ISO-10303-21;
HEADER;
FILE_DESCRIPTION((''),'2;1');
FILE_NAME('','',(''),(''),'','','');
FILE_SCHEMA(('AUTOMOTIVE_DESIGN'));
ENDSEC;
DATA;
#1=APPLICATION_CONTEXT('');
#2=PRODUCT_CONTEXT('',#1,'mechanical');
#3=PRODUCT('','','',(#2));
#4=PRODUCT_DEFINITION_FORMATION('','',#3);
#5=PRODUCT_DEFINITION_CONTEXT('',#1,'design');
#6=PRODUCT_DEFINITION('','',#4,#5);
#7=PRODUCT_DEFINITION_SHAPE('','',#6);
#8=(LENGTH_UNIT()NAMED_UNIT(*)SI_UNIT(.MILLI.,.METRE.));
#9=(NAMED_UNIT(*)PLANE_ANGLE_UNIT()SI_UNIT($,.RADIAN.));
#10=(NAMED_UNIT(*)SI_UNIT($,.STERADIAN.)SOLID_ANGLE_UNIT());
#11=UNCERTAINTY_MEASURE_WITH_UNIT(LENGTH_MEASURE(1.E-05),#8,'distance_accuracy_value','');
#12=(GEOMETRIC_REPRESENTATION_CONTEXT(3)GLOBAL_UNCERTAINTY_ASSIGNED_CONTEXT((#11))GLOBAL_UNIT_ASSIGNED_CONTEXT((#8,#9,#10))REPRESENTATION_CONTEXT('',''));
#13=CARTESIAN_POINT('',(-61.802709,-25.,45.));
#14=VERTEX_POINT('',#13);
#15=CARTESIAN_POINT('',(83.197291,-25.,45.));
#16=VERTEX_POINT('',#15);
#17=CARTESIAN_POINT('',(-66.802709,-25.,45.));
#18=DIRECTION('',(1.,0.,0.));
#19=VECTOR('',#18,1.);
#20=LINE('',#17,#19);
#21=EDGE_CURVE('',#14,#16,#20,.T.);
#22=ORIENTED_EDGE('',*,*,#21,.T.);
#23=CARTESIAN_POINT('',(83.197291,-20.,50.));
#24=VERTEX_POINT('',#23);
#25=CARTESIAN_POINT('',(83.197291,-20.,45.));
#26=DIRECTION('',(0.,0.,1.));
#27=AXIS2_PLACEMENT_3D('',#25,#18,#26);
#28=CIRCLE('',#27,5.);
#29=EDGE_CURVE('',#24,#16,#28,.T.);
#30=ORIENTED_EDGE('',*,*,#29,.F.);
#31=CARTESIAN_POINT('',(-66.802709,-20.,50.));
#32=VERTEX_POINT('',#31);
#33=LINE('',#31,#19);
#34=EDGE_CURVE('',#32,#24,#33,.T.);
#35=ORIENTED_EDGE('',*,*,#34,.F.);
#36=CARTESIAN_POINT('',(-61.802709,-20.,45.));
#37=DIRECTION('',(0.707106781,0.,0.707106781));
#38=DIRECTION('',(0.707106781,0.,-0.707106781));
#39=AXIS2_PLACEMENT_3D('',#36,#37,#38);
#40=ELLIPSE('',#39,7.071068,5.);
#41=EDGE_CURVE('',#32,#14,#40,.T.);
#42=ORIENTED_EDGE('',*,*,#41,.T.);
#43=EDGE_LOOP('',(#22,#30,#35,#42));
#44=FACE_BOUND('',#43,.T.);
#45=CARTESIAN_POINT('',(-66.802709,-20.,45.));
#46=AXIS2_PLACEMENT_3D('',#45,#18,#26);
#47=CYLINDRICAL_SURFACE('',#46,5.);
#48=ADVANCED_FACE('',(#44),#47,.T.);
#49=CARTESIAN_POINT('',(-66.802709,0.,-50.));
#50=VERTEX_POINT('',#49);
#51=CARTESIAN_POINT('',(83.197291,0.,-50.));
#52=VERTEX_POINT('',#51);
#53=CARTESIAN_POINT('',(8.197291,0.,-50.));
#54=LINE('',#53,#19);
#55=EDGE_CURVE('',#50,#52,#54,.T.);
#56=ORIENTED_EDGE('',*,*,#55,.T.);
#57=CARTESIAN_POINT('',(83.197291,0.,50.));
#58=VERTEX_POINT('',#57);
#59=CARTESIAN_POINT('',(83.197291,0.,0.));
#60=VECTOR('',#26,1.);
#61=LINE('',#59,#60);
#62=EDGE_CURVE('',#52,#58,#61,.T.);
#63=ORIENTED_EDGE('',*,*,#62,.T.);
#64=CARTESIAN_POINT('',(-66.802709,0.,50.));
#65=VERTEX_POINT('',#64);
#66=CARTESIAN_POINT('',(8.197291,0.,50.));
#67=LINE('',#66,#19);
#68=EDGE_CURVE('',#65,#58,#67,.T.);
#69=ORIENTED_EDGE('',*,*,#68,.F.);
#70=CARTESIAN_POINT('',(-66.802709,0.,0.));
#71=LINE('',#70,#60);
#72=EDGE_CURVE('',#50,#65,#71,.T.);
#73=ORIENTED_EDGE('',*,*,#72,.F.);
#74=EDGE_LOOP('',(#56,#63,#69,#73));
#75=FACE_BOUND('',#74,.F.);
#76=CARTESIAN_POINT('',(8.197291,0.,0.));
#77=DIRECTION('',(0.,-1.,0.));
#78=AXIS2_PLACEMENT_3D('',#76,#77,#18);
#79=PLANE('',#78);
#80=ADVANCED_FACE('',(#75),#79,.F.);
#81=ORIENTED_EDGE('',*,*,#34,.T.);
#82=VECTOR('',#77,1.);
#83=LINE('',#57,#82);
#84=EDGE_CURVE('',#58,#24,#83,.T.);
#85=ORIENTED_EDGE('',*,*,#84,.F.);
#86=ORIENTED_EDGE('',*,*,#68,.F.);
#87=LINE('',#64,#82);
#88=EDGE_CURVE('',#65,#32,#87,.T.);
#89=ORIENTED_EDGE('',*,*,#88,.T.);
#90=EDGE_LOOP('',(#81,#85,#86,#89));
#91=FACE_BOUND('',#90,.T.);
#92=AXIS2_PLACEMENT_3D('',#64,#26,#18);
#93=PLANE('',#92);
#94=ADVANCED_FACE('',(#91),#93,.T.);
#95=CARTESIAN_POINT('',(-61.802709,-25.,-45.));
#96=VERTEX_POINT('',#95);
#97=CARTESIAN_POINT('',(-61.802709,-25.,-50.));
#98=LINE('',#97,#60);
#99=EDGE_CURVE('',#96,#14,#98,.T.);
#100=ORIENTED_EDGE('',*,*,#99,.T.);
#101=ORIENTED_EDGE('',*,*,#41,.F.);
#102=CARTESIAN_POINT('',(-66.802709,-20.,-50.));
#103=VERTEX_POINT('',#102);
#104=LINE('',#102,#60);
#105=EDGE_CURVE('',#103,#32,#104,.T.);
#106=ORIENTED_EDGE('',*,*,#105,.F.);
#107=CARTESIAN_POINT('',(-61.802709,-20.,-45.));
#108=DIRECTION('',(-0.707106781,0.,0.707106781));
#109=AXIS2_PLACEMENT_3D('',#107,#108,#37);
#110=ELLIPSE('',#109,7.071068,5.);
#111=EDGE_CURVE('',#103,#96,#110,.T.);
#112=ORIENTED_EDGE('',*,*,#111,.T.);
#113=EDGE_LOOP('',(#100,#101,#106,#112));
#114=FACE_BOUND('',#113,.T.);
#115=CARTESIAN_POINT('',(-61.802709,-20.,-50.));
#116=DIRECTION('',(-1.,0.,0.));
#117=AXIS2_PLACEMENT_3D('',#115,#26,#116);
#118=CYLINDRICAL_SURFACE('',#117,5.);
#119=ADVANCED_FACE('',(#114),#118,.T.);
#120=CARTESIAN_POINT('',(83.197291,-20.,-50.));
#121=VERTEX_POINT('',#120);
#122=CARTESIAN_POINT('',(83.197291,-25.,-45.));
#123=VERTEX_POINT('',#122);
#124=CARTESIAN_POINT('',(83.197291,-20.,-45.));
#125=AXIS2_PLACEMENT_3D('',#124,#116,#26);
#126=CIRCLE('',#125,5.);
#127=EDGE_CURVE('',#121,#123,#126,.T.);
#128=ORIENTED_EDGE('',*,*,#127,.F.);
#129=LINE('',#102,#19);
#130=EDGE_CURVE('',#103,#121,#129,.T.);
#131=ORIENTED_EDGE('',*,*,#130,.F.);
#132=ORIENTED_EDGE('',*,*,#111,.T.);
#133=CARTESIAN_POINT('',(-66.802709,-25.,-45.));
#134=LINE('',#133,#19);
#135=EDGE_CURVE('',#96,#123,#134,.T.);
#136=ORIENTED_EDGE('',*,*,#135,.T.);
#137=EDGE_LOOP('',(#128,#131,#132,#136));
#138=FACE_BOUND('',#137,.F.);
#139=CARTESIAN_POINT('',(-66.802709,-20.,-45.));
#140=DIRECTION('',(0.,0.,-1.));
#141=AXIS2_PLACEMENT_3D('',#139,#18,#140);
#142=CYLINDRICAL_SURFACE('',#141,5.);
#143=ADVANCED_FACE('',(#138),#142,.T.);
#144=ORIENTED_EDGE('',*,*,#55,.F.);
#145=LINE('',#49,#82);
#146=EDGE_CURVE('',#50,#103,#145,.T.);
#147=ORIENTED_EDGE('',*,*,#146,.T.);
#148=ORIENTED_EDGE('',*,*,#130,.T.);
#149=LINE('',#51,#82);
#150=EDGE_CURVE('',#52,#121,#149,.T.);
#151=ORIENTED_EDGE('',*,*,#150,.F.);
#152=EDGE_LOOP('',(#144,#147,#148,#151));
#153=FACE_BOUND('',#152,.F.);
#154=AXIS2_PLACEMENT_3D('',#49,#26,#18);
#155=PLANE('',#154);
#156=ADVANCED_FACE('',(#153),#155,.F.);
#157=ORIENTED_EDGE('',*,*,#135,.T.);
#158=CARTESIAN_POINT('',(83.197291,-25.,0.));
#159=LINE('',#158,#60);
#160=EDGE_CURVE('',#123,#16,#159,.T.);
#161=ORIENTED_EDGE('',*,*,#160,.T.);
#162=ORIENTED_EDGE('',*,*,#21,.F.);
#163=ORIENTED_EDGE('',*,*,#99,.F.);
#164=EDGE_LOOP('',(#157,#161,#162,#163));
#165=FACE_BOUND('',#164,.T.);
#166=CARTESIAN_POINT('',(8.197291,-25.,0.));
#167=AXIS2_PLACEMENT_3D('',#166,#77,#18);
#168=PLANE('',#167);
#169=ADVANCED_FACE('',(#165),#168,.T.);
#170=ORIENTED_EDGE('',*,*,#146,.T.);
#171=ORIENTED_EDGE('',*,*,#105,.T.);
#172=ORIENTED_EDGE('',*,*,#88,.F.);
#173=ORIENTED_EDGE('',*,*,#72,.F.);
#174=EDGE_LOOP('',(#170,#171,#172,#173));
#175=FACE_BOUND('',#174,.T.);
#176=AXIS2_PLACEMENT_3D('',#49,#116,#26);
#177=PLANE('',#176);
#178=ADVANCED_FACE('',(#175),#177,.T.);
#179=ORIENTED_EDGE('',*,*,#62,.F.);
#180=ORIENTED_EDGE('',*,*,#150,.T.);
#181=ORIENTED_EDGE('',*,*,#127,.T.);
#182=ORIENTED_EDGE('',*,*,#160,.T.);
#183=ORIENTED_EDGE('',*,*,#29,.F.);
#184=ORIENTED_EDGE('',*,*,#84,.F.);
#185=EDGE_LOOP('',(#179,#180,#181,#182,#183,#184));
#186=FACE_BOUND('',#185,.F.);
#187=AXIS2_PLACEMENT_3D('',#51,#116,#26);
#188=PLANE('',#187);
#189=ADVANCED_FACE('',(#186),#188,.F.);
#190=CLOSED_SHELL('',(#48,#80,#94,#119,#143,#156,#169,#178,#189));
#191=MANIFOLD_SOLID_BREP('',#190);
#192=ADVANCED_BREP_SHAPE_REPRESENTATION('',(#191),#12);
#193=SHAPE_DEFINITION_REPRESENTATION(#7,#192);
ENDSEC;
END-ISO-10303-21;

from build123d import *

# Parameters (mm, degrees)
F0_W     = 150
F0_H     = 100
F1_DEPTH = 25
F2_R     = 5


# Not quite as in the source:
# - a feature names something its author has since deleted; it is built from what else it names


with BuildPart() as f1:
    # F0 (on Front) → F1 (new body)
    with BuildSketch(Plane.XZ):
        with Locations((8.1972908229, 0)):
            Rectangle(F0_W, F0_H)
    extrude(amount=F1_DEPTH)

    # F2
    f2_edges = [f1.edges().sort_by_distance(p)[0] for p in [
        (8.197291, -25, 50),
        (-66.802709, -25, 0),
        (8.197291, -25, -50),
    ]]
    fillet(f2_edges, radius=F2_R)


solid = f1.part
